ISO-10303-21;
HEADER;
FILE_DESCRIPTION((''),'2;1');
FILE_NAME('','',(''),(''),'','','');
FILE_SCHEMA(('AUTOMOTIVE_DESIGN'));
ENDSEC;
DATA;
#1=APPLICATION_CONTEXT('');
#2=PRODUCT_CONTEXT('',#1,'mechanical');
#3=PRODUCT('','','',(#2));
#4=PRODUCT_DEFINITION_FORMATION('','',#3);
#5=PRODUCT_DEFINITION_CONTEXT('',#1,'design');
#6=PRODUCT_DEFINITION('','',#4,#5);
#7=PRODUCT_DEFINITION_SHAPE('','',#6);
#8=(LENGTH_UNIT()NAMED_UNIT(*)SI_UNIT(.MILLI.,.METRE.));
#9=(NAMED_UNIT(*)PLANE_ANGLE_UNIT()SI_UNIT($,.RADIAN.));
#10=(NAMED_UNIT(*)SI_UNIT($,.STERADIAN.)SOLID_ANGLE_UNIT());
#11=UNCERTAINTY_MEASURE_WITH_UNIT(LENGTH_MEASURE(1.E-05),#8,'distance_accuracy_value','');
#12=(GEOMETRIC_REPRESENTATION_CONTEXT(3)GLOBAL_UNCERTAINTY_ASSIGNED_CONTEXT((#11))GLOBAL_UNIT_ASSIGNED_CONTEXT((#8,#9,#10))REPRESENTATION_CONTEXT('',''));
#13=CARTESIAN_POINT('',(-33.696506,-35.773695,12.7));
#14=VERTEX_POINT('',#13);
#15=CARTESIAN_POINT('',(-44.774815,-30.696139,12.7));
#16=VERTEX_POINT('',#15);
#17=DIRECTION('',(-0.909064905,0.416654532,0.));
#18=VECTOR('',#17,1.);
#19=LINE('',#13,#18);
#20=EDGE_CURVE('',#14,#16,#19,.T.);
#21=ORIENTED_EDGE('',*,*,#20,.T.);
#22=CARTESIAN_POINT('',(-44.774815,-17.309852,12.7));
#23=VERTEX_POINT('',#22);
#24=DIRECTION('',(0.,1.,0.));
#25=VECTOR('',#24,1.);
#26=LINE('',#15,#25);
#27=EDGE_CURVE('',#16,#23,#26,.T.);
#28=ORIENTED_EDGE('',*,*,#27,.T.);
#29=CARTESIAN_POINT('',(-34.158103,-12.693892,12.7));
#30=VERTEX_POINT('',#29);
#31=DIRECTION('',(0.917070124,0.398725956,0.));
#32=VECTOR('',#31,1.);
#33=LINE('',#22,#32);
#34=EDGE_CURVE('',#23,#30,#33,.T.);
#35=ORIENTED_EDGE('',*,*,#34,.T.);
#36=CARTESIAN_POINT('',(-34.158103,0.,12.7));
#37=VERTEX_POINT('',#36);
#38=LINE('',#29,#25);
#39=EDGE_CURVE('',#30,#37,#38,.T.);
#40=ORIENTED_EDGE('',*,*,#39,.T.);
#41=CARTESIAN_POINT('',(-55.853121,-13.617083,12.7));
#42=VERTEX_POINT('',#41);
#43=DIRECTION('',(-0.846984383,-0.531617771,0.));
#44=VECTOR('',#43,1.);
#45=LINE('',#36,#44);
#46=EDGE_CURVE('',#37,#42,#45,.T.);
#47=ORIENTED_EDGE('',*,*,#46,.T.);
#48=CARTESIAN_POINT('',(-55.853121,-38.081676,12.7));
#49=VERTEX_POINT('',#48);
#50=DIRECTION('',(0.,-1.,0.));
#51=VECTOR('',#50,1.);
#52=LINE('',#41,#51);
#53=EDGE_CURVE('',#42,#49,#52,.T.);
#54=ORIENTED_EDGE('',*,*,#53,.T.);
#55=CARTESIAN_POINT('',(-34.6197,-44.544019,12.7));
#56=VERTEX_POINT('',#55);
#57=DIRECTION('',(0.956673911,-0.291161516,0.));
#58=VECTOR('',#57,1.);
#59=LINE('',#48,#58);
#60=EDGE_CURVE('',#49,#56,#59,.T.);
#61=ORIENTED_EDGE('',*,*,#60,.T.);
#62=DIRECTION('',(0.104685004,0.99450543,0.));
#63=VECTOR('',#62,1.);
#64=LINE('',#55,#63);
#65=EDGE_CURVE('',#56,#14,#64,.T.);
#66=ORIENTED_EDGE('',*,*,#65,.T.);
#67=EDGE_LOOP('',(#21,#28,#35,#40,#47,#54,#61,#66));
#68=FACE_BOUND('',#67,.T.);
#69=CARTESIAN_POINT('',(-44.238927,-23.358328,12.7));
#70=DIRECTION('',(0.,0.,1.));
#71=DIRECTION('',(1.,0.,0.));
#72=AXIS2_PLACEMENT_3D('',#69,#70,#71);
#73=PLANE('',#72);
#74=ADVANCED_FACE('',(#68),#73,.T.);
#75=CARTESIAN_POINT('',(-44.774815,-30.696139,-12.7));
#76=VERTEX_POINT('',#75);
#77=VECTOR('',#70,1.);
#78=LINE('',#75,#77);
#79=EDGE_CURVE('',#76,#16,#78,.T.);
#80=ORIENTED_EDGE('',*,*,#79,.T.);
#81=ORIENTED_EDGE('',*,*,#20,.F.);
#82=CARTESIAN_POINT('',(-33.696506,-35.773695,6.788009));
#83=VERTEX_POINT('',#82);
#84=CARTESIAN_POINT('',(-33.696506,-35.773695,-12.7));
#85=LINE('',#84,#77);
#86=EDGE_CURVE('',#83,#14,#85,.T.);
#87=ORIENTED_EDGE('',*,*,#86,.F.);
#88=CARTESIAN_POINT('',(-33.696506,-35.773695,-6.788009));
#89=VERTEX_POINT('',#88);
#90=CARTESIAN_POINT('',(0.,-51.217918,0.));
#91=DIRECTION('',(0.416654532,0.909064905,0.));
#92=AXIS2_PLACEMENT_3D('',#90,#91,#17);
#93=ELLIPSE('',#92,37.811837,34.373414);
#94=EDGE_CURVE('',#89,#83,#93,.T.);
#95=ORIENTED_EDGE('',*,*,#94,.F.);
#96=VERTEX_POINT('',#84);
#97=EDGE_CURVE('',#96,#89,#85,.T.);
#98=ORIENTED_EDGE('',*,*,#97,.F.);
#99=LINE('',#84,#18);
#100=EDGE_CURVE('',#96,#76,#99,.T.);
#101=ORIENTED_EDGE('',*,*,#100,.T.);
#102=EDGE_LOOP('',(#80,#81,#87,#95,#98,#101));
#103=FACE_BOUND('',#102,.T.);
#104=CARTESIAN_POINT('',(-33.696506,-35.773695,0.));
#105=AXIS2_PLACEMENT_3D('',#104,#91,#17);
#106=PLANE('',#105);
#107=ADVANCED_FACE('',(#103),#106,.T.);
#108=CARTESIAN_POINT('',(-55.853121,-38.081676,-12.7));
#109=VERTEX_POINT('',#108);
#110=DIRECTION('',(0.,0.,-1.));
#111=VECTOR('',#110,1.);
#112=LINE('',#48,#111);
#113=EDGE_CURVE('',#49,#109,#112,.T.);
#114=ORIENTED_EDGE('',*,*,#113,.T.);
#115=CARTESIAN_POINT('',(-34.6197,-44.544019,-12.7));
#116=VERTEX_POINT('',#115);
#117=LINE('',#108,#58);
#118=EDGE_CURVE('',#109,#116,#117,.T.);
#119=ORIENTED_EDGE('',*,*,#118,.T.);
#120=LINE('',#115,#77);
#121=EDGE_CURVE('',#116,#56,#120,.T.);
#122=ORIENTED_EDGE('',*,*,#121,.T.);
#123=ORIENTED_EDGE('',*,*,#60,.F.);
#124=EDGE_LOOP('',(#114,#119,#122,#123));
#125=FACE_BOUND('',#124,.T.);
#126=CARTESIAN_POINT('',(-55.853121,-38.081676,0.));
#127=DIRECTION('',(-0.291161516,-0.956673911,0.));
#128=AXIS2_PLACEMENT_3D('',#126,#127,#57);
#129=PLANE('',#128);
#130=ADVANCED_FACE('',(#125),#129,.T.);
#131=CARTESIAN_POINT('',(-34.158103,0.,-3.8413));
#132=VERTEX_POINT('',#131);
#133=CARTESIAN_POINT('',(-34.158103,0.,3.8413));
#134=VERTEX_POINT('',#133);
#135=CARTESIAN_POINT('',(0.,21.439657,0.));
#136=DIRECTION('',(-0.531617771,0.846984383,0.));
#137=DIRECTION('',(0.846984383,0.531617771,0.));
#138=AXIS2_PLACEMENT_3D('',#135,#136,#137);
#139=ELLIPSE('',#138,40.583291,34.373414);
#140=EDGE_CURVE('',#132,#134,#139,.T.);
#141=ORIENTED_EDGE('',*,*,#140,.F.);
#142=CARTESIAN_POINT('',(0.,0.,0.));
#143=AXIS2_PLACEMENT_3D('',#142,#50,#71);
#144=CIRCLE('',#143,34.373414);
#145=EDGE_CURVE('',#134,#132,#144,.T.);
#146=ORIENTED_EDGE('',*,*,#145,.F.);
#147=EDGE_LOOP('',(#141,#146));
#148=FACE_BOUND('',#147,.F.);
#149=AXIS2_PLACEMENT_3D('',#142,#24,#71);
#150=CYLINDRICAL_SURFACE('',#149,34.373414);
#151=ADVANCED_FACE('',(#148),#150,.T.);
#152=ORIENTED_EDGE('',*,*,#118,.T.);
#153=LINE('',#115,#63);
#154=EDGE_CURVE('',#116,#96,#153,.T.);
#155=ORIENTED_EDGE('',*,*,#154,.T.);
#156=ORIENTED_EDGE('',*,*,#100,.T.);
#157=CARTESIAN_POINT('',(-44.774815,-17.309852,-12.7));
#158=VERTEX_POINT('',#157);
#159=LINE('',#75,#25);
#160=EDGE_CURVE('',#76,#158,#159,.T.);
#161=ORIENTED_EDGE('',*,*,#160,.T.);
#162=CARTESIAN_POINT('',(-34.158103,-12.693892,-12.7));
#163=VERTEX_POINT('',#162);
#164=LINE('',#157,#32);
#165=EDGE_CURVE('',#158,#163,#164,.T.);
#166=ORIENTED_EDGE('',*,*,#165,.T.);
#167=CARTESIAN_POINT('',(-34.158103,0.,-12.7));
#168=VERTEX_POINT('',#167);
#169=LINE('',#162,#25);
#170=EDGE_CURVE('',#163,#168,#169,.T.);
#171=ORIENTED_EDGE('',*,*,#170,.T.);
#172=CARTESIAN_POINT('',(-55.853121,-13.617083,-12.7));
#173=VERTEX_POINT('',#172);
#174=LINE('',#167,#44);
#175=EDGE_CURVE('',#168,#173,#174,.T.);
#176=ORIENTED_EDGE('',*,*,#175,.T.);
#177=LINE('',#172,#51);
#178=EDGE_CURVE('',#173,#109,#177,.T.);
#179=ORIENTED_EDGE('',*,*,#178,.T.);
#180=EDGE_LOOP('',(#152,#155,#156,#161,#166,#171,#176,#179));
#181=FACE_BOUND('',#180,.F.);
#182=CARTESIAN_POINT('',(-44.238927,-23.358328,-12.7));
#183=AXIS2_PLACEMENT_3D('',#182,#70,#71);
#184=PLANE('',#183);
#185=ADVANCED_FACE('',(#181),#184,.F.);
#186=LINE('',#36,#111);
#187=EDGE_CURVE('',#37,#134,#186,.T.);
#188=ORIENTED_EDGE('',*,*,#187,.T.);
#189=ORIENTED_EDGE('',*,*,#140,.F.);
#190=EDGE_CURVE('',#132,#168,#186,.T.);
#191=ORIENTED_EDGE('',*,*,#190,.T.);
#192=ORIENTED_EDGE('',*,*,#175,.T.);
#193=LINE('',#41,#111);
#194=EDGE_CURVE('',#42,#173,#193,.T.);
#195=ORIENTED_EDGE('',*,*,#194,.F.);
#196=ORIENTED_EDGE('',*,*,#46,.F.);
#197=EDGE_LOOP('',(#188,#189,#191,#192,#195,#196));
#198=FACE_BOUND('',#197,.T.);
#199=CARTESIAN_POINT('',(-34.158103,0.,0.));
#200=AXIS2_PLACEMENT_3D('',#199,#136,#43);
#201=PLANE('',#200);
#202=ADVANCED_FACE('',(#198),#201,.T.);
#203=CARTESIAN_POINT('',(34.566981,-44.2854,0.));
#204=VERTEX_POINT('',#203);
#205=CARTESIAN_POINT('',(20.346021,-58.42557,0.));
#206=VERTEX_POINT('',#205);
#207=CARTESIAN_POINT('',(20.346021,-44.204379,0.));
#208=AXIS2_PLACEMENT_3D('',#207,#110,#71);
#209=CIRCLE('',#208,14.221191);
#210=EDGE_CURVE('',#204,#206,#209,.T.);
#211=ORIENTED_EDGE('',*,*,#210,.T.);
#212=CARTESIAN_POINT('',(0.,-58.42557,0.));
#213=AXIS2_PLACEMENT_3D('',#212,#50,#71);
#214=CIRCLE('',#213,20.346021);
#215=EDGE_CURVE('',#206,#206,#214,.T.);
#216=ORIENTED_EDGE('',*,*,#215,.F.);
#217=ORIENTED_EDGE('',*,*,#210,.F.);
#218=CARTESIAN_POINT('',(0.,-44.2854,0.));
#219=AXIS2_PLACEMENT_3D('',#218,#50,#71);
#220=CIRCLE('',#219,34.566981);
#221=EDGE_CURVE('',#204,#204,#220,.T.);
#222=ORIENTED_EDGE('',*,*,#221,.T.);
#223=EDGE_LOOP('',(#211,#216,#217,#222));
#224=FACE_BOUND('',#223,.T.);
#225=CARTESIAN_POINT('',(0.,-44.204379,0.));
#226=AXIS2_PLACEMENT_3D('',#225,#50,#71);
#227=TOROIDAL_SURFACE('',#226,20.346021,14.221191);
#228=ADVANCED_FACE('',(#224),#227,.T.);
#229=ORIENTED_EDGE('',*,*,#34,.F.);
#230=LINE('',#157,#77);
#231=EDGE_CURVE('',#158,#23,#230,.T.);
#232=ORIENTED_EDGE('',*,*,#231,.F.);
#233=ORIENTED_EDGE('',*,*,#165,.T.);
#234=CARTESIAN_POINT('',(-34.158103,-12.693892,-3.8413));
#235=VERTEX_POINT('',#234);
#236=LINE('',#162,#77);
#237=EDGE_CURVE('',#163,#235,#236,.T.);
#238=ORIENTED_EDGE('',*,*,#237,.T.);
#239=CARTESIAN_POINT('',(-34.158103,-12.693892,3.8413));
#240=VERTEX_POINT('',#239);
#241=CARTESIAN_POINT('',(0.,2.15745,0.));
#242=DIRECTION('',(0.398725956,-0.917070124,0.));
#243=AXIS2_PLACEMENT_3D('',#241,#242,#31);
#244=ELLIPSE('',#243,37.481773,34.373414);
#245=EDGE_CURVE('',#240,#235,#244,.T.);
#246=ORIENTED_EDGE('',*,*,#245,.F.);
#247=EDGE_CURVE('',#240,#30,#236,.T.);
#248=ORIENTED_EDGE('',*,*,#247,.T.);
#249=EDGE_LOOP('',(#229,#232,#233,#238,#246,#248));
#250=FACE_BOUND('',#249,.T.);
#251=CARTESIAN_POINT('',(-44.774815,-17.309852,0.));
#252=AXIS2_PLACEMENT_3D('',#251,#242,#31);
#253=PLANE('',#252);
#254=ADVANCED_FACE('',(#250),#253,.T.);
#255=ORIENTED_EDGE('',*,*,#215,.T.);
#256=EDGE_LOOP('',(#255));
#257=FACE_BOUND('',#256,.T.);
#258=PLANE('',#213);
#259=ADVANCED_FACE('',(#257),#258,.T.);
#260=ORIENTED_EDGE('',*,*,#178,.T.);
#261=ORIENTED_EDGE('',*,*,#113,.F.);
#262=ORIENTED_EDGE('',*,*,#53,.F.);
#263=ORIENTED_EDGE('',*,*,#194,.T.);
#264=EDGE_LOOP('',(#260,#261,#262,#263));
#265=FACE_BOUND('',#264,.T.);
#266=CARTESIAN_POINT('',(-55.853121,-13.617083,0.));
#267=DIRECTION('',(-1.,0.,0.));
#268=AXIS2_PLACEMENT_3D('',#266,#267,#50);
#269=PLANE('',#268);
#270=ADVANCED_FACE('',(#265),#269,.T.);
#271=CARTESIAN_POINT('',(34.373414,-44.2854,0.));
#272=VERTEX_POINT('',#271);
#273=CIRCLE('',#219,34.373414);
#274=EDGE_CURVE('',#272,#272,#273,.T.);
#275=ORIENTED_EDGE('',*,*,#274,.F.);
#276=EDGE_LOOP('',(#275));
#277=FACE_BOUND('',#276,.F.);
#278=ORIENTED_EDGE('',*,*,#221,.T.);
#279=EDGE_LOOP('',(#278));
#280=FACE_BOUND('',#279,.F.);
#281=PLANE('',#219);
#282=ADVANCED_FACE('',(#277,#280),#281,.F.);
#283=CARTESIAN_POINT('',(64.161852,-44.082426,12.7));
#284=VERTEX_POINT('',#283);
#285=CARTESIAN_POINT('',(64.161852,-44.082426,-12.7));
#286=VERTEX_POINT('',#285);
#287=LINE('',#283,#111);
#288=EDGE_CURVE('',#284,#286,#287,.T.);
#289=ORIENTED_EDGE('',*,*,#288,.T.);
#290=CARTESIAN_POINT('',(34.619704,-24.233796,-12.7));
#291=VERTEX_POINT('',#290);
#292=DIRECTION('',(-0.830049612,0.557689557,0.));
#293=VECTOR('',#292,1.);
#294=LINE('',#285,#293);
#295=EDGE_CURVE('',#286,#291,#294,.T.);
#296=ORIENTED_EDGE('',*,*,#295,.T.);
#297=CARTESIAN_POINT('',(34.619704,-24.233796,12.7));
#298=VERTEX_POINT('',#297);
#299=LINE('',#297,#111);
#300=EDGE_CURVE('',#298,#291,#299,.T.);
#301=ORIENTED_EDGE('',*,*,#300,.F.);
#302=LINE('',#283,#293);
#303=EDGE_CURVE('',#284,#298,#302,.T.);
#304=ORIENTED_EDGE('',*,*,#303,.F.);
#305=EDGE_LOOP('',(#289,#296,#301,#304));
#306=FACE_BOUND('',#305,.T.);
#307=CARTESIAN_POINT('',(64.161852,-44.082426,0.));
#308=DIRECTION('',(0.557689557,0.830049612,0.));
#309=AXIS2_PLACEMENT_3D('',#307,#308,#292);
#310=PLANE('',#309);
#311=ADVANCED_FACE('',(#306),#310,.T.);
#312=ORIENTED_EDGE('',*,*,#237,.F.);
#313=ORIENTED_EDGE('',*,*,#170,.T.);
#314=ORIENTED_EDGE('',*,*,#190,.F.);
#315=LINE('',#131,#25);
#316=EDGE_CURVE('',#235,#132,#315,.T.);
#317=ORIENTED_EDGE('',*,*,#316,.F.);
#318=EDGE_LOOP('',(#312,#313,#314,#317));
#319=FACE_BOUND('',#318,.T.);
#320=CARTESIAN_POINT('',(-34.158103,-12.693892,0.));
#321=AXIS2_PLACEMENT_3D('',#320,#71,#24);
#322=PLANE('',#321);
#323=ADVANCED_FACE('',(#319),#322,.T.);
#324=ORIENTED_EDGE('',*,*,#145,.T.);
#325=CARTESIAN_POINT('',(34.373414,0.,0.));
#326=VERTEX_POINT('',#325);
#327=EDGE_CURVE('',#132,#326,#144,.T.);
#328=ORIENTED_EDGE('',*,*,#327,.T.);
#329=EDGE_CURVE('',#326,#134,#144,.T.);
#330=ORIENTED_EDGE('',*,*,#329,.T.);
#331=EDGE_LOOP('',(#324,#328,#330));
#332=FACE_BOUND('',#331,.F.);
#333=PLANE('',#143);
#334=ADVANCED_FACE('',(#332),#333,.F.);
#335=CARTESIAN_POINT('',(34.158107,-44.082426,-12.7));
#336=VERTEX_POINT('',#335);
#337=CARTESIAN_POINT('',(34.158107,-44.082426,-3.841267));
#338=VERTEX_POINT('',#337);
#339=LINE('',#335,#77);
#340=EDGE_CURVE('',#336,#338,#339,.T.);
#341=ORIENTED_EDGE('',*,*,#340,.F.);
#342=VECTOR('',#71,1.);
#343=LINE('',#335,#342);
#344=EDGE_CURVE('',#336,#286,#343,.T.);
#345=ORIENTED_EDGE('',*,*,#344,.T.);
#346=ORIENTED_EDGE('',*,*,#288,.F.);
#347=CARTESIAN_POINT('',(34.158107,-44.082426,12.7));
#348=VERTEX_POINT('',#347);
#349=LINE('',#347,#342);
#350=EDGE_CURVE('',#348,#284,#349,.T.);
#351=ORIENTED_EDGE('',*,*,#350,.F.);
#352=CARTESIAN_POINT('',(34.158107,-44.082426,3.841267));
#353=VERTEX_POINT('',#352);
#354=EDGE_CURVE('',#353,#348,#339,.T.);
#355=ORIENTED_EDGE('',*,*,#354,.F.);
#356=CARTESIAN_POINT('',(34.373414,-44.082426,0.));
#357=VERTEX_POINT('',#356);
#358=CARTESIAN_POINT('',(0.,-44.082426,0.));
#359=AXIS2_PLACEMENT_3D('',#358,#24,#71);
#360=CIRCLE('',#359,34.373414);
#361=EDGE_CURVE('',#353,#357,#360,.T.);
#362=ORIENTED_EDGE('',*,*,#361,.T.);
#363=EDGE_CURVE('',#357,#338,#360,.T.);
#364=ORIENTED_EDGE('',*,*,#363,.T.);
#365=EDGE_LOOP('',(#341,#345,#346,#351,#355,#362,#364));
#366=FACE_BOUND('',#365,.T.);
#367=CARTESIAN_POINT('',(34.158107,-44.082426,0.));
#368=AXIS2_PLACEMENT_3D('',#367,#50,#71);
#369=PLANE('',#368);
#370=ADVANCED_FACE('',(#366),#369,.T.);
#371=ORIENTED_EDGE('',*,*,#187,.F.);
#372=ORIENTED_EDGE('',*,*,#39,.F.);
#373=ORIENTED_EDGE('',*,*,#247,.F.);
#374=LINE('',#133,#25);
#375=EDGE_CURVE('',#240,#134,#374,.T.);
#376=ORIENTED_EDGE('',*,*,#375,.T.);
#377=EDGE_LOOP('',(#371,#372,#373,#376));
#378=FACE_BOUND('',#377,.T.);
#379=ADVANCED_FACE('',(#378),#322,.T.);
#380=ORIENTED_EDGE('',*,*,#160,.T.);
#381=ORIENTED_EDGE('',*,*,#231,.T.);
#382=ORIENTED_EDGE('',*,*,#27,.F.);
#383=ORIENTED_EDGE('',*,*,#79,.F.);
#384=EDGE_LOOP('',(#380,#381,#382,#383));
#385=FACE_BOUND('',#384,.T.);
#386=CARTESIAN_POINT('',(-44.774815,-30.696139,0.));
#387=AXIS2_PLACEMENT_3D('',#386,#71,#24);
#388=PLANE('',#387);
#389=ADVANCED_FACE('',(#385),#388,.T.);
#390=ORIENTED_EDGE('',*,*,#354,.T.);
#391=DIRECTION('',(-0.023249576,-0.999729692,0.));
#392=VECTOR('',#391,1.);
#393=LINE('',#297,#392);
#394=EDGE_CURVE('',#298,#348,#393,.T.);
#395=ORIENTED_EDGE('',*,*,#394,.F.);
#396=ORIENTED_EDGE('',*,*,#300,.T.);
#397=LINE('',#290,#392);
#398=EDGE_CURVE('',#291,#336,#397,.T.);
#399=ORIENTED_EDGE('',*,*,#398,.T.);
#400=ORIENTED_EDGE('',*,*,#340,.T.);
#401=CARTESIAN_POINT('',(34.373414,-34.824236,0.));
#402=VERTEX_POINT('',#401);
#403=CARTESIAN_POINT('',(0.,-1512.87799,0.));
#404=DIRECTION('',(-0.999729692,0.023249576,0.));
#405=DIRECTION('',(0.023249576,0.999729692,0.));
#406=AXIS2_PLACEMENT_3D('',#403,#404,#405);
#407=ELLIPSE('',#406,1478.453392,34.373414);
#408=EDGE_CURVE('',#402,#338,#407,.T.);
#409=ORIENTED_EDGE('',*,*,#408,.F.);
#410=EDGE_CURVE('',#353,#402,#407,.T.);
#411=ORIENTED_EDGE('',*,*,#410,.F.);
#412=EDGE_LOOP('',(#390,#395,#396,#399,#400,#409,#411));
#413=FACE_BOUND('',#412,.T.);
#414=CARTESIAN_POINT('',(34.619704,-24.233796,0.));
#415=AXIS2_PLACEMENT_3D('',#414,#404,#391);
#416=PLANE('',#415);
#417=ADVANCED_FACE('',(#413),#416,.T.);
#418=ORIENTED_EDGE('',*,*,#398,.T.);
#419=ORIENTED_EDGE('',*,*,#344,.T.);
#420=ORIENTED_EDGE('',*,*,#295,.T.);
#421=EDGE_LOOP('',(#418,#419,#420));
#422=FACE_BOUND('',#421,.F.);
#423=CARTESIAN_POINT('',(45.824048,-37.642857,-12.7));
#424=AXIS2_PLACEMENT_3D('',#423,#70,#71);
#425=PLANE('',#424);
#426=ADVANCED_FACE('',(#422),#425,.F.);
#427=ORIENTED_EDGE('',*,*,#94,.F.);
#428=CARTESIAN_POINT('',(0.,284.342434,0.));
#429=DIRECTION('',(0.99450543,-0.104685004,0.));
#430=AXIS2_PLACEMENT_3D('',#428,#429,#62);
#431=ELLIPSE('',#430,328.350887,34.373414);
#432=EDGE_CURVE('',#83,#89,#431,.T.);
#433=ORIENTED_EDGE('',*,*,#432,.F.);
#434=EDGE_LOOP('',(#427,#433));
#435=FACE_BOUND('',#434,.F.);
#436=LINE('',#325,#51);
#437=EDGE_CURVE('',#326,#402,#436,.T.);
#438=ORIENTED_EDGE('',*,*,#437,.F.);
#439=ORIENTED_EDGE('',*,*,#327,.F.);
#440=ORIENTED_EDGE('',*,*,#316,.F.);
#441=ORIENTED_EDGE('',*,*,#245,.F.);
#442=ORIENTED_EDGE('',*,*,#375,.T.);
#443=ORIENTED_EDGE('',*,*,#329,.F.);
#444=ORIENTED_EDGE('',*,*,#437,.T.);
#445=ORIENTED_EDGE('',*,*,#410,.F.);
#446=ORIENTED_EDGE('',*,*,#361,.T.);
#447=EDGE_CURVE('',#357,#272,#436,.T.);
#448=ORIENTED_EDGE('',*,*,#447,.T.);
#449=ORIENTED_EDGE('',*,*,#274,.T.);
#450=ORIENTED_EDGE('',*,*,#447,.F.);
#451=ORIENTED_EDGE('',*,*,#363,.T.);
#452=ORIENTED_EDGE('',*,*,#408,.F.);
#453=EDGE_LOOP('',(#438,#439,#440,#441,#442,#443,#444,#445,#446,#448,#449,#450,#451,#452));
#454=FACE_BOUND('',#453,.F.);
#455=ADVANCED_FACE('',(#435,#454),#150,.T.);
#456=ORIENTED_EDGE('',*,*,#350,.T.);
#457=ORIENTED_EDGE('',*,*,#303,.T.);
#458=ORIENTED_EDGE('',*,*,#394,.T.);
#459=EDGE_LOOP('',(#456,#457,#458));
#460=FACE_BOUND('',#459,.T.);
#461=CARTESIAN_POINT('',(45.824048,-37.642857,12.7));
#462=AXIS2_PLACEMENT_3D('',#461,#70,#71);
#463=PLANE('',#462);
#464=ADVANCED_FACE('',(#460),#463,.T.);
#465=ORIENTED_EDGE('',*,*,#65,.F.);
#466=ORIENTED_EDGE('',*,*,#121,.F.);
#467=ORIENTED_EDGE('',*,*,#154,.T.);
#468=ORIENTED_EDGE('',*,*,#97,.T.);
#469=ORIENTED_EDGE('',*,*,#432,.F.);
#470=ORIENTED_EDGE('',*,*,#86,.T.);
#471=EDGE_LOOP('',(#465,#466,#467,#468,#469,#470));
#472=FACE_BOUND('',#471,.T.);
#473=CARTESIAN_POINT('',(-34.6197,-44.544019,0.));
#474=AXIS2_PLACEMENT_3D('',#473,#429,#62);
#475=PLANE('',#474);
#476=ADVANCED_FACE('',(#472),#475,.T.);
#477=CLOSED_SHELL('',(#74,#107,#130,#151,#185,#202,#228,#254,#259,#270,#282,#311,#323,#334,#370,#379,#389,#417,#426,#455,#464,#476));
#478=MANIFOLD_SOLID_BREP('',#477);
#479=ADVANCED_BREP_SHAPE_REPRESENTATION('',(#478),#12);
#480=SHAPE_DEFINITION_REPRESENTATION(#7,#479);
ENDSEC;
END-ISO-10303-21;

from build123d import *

# Parameters (mm, degrees)
F0_R     = 34.3734140818
F1_DEPTH = 44.2854
F2_R     = 34.5672113186
F3_DEPTH = 14.14017
F6_DEPTH = 12.7
F8_DEPTH = 12.7


# Not quite as in the source:
# - a fillet or chamfer that OpenCascade refuses, or shapes differently, is made with other operations: its cross-section is extruded or revolved along the edge and cut away or added


with BuildPart() as f1:
    # F0 (on Front) → F1 (new body)
    with BuildSketch(Plane.XZ):
        Circle(F0_R)
    extrude(amount=F1_DEPTH)

    # F2 (on face) → F3 (join)
    with BuildSketch(Plane.XZ.offset(44.2854)):
        Circle(F2_R)
    extrude(amount=F3_DEPTH)

    # F4: fillet of radius 14.2211905527 on 1 edges, made by hand

    # F4_s1 → F4_t2 (revolve, cut)
    with BuildSketch(Plane.XY):
        with BuildLine():
            ThreePointArc((34.5672113186, -44.2043794473), (30.4019210422, -54.2602797237), (20.3460207659, -58.42557))
            Line((20.3460207659, -58.42557), (34.5672113186, -58.42557))
            Line((34.5672113186, -58.42557), (34.5672113186, -44.2043794473))
        make_face()
    revolve(axis=Axis((0, -58.42557, 0), (0, -1, 0)), mode=Mode.SUBTRACT)

    # F5 (on Top) → F6 (join, symmetric)
    with BuildSketch(Plane.XY):
        Polygon((34.6197038889, -24.2337957025), (34.1581068933, -44.0824255347), (64.1618520021, -44.0824255347), align=None)
    extrude(amount=F6_DEPTH, both=True)

    # F7 (on Top) → F8 (join, symmetric)
    with BuildSketch(Plane.XY):
        Polygon((-55.8531209826, -38.0816757679), (-34.6197001636, -44.544018805), (-33.6965061724, -35.7736945152), (-44.7748154402, -30.6961387396), (-44.7748154402, -17.3098519444), (-34.158103168, -12.6938922331), (-34.158103168, 0), (-55.8531209826, -13.6170834303), align=None)
    extrude(amount=F8_DEPTH, both=True)


solid = f1.part
